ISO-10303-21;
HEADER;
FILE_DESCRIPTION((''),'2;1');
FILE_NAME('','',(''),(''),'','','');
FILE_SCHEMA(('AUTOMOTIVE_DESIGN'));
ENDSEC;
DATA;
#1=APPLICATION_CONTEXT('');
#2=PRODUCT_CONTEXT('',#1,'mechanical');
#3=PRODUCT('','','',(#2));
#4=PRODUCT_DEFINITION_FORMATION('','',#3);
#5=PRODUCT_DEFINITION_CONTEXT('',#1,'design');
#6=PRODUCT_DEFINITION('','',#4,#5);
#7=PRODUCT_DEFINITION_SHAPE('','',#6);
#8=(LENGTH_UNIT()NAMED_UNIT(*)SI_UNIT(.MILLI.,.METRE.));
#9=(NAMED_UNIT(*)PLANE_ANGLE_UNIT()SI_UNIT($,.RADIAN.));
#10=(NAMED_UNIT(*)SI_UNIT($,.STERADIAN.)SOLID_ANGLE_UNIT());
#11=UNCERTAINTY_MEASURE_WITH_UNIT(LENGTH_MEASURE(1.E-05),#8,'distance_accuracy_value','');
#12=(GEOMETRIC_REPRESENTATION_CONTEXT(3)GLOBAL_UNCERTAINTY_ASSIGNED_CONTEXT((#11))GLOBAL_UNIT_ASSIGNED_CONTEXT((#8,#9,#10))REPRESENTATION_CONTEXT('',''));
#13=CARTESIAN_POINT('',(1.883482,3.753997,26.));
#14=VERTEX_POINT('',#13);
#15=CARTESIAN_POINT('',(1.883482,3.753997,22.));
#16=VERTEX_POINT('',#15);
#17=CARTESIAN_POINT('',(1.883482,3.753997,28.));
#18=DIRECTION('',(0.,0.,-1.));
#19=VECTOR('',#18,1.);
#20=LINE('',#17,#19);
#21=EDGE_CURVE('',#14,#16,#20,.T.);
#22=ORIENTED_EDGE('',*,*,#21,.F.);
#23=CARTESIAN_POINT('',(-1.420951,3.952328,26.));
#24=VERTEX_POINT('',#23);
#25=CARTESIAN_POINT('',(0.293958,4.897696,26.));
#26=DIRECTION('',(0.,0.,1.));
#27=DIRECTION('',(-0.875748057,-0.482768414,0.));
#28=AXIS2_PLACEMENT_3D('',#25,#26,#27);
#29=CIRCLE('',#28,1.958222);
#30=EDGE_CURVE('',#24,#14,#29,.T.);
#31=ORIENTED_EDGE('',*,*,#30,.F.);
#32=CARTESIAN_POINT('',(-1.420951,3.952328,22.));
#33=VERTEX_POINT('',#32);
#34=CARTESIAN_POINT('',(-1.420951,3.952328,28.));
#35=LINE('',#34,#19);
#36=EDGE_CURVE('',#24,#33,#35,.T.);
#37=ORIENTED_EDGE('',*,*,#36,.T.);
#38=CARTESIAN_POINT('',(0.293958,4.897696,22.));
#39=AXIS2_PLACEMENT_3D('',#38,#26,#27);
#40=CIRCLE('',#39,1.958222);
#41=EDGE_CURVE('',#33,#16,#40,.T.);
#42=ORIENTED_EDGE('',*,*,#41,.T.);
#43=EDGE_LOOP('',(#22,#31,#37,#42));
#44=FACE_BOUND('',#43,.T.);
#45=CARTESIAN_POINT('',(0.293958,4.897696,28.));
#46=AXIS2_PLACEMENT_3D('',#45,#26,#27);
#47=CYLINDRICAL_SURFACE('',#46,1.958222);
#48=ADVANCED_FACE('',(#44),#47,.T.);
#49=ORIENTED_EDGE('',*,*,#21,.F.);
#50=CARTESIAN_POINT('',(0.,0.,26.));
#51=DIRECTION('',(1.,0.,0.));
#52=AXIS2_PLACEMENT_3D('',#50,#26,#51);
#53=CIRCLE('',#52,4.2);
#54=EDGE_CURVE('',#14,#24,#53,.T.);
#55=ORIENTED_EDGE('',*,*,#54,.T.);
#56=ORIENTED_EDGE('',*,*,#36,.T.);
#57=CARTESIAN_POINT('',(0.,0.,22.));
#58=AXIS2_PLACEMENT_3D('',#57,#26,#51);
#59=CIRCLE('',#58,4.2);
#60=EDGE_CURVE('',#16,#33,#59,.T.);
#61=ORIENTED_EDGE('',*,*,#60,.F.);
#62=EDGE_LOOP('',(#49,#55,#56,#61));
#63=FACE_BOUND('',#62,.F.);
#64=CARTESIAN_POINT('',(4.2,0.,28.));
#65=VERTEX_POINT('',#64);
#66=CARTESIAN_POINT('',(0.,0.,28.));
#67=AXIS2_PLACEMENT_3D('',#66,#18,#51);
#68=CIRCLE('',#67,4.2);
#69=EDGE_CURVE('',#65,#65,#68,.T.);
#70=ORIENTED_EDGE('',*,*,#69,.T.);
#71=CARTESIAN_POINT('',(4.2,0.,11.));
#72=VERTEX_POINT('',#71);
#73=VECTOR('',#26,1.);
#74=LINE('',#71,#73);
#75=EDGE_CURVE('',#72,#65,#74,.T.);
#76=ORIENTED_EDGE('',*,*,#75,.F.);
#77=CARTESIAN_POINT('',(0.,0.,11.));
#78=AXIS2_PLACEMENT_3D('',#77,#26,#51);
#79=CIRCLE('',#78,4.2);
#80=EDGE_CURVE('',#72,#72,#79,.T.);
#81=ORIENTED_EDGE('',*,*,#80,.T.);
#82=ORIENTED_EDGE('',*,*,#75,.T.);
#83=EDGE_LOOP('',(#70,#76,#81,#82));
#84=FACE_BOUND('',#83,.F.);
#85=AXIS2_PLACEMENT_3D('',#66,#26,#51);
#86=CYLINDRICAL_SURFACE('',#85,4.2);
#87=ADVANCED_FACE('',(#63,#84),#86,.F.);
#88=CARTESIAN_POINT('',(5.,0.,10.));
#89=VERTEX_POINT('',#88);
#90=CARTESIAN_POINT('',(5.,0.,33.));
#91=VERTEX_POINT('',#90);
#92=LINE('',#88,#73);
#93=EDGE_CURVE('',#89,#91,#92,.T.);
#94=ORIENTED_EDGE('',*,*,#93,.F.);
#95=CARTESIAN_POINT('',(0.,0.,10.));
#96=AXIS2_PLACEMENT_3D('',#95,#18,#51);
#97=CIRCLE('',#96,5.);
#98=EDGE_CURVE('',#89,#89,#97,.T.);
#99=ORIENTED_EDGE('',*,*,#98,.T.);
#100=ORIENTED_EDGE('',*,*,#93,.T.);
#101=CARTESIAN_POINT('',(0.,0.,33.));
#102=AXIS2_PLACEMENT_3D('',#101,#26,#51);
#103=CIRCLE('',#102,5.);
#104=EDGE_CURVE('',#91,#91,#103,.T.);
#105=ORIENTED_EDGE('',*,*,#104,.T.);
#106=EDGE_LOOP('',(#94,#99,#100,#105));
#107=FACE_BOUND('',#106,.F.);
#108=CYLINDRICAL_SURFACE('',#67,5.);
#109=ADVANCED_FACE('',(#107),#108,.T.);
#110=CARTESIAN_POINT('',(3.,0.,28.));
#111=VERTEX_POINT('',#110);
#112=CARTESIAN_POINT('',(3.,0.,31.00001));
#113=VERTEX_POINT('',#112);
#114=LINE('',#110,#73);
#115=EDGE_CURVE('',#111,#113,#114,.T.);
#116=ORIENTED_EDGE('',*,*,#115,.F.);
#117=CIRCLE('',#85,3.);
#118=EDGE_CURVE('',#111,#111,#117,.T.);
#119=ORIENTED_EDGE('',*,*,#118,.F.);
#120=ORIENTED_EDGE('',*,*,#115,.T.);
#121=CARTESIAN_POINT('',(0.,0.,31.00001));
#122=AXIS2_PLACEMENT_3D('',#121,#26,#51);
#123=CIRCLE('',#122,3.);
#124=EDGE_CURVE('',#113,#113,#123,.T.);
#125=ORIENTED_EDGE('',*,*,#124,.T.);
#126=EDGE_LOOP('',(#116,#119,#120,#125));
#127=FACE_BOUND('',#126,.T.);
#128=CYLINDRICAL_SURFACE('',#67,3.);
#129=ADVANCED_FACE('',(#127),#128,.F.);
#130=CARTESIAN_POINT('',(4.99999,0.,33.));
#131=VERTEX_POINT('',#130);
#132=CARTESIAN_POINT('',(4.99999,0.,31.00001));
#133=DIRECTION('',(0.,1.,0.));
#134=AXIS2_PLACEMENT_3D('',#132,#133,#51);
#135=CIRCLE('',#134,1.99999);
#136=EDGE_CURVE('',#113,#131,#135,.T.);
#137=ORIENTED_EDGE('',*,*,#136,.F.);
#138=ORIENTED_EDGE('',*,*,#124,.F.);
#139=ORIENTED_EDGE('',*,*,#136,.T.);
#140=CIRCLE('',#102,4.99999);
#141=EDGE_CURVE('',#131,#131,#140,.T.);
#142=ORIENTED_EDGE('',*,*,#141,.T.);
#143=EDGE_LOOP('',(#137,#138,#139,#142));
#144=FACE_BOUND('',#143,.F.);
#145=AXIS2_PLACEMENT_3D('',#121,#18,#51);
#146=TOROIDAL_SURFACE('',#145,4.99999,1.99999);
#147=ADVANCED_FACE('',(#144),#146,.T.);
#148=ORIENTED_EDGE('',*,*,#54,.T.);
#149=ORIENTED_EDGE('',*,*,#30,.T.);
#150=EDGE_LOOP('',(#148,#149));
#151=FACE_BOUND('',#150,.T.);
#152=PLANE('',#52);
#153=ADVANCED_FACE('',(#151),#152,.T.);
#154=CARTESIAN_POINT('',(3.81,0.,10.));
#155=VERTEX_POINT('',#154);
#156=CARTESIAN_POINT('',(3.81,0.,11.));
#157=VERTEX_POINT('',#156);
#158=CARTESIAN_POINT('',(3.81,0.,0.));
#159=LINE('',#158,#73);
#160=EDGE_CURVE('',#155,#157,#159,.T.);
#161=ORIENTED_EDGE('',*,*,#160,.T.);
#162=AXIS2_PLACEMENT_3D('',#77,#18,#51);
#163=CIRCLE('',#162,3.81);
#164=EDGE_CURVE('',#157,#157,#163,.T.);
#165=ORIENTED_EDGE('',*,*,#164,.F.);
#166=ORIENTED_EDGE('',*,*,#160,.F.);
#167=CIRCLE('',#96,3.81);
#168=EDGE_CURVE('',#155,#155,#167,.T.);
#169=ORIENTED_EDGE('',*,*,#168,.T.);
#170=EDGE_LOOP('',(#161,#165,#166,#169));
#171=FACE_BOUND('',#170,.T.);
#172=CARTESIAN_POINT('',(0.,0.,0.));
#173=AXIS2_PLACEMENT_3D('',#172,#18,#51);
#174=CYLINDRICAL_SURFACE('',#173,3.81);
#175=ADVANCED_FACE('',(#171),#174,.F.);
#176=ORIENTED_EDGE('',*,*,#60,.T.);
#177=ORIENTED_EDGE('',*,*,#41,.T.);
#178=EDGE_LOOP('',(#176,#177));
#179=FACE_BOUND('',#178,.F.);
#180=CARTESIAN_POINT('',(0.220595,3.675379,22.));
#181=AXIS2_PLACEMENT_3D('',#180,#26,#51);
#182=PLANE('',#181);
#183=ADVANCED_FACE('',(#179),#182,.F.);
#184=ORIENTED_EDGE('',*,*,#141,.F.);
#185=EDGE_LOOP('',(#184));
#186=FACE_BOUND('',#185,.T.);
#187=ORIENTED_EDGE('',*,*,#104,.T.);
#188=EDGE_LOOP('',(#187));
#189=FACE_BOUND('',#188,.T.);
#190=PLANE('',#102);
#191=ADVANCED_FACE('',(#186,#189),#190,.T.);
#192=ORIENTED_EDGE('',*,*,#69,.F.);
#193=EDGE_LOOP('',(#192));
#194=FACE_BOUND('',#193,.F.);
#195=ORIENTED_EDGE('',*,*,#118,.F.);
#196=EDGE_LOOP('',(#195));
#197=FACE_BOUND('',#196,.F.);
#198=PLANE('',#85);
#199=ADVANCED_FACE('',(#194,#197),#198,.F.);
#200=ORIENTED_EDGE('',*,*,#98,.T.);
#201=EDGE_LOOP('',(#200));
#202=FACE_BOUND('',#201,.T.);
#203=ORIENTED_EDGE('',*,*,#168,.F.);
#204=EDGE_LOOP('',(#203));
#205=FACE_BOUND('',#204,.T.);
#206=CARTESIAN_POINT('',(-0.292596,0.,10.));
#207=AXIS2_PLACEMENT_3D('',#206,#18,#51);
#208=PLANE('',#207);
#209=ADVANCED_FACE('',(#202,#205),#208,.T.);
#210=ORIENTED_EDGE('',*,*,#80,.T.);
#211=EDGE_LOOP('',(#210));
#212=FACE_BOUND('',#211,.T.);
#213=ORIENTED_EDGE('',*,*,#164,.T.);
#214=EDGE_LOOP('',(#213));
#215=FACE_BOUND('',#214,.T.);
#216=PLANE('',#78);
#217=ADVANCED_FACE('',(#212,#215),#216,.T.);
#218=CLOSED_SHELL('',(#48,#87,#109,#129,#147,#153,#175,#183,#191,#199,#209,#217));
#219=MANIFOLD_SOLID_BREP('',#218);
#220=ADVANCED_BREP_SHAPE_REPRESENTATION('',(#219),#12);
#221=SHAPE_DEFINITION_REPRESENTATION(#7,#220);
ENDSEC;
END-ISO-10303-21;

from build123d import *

# Parameters (mm, degrees)
F0_R      = 5
F0_R_2    = 3.81
F1_DEPTH  = 28
F3_R      = 4.2
F4_DEPTH  = 10
F5_R      = 6.6272432787
F6_DEPTH  = 10
F2_R      = 4.2
F7_DEPTH  = 17
F9_DEPTH  = 6
F10_R     = 4.2
F11_DEPTH = 2
F12_R     = 5
F12_R_2   = 3
F13_DEPTH = 5
F14_R     = 1.99999


# Not quite as in the source:
# - a fillet or chamfer is up to 0.001 mm smaller than in the source, because OpenCascade refuses the exact size


with BuildPart() as f1:
    # F0 (on Top) → F1 (new body)
    with BuildSketch(Plane.XY):
        Circle(F0_R)
        Circle(F0_R_2, mode=Mode.SUBTRACT)
    extrude(amount=F1_DEPTH)

    # F3 (on face) → F4 (cut)
    with BuildSketch(Plane(origin=(0, 0, 0), x_dir=(1, 0, 0), z_dir=(0, 0, -1))):
        with Locations((0.1565692156, 0)):
            Circle(F3_R)
    extrude(amount=-F4_DEPTH, mode=Mode.SUBTRACT)

    # F5 (on face) → F6 (cut)
    with BuildSketch(Plane(origin=(0, 0, 0), x_dir=(1, 0, 0), z_dir=(0, 0, -1))):
        with Locations((-0.2925955923, 0)):
            Circle(F5_R)
    extrude(amount=-F6_DEPTH, mode=Mode.SUBTRACT)

    # F2 (on face) → F7 (cut)
    with BuildSketch(Plane.XY.offset(28)):
        Circle(F2_R)
    extrude(amount=-F7_DEPTH, mode=Mode.SUBTRACT)

    # F8 (on face) → F9 (join)
    with BuildSketch(Plane.XY.offset(28)):
        with BuildLine():
            ThreePointArc((1.8834823008, 3.7539971261), (0.2542086961, 4.2354191199), (-1.4209507588, 3.9523282937))
            ThreePointArc((-1.4209507588, 3.9523282937), (0.1766375517, 2.9429916253), (1.8834823008, 3.7539971261))
        make_face()
    extrude(amount=-F9_DEPTH)

    # F10 (on face) → F11 (cut)
    with BuildSketch(Plane.XY.offset(28)):
        Circle(F10_R)
    extrude(amount=-F11_DEPTH, mode=Mode.SUBTRACT)

    # F12 (on face) → F13 (join)
    with BuildSketch(Plane.XY.offset(28)):
        Circle(F12_R)
        Circle(F12_R_2, mode=Mode.SUBTRACT)
    extrude(amount=F13_DEPTH)

    # F14 (radius 2 in the source; OpenCascade refuses exactly that, so slightly less here)
    f14_edges = [f1.edges().sort_by_distance(p)[0] for p in [
        (-3, 0, 33),
    ]]
    fillet(f14_edges, radius=F14_R)


solid = f1.part
